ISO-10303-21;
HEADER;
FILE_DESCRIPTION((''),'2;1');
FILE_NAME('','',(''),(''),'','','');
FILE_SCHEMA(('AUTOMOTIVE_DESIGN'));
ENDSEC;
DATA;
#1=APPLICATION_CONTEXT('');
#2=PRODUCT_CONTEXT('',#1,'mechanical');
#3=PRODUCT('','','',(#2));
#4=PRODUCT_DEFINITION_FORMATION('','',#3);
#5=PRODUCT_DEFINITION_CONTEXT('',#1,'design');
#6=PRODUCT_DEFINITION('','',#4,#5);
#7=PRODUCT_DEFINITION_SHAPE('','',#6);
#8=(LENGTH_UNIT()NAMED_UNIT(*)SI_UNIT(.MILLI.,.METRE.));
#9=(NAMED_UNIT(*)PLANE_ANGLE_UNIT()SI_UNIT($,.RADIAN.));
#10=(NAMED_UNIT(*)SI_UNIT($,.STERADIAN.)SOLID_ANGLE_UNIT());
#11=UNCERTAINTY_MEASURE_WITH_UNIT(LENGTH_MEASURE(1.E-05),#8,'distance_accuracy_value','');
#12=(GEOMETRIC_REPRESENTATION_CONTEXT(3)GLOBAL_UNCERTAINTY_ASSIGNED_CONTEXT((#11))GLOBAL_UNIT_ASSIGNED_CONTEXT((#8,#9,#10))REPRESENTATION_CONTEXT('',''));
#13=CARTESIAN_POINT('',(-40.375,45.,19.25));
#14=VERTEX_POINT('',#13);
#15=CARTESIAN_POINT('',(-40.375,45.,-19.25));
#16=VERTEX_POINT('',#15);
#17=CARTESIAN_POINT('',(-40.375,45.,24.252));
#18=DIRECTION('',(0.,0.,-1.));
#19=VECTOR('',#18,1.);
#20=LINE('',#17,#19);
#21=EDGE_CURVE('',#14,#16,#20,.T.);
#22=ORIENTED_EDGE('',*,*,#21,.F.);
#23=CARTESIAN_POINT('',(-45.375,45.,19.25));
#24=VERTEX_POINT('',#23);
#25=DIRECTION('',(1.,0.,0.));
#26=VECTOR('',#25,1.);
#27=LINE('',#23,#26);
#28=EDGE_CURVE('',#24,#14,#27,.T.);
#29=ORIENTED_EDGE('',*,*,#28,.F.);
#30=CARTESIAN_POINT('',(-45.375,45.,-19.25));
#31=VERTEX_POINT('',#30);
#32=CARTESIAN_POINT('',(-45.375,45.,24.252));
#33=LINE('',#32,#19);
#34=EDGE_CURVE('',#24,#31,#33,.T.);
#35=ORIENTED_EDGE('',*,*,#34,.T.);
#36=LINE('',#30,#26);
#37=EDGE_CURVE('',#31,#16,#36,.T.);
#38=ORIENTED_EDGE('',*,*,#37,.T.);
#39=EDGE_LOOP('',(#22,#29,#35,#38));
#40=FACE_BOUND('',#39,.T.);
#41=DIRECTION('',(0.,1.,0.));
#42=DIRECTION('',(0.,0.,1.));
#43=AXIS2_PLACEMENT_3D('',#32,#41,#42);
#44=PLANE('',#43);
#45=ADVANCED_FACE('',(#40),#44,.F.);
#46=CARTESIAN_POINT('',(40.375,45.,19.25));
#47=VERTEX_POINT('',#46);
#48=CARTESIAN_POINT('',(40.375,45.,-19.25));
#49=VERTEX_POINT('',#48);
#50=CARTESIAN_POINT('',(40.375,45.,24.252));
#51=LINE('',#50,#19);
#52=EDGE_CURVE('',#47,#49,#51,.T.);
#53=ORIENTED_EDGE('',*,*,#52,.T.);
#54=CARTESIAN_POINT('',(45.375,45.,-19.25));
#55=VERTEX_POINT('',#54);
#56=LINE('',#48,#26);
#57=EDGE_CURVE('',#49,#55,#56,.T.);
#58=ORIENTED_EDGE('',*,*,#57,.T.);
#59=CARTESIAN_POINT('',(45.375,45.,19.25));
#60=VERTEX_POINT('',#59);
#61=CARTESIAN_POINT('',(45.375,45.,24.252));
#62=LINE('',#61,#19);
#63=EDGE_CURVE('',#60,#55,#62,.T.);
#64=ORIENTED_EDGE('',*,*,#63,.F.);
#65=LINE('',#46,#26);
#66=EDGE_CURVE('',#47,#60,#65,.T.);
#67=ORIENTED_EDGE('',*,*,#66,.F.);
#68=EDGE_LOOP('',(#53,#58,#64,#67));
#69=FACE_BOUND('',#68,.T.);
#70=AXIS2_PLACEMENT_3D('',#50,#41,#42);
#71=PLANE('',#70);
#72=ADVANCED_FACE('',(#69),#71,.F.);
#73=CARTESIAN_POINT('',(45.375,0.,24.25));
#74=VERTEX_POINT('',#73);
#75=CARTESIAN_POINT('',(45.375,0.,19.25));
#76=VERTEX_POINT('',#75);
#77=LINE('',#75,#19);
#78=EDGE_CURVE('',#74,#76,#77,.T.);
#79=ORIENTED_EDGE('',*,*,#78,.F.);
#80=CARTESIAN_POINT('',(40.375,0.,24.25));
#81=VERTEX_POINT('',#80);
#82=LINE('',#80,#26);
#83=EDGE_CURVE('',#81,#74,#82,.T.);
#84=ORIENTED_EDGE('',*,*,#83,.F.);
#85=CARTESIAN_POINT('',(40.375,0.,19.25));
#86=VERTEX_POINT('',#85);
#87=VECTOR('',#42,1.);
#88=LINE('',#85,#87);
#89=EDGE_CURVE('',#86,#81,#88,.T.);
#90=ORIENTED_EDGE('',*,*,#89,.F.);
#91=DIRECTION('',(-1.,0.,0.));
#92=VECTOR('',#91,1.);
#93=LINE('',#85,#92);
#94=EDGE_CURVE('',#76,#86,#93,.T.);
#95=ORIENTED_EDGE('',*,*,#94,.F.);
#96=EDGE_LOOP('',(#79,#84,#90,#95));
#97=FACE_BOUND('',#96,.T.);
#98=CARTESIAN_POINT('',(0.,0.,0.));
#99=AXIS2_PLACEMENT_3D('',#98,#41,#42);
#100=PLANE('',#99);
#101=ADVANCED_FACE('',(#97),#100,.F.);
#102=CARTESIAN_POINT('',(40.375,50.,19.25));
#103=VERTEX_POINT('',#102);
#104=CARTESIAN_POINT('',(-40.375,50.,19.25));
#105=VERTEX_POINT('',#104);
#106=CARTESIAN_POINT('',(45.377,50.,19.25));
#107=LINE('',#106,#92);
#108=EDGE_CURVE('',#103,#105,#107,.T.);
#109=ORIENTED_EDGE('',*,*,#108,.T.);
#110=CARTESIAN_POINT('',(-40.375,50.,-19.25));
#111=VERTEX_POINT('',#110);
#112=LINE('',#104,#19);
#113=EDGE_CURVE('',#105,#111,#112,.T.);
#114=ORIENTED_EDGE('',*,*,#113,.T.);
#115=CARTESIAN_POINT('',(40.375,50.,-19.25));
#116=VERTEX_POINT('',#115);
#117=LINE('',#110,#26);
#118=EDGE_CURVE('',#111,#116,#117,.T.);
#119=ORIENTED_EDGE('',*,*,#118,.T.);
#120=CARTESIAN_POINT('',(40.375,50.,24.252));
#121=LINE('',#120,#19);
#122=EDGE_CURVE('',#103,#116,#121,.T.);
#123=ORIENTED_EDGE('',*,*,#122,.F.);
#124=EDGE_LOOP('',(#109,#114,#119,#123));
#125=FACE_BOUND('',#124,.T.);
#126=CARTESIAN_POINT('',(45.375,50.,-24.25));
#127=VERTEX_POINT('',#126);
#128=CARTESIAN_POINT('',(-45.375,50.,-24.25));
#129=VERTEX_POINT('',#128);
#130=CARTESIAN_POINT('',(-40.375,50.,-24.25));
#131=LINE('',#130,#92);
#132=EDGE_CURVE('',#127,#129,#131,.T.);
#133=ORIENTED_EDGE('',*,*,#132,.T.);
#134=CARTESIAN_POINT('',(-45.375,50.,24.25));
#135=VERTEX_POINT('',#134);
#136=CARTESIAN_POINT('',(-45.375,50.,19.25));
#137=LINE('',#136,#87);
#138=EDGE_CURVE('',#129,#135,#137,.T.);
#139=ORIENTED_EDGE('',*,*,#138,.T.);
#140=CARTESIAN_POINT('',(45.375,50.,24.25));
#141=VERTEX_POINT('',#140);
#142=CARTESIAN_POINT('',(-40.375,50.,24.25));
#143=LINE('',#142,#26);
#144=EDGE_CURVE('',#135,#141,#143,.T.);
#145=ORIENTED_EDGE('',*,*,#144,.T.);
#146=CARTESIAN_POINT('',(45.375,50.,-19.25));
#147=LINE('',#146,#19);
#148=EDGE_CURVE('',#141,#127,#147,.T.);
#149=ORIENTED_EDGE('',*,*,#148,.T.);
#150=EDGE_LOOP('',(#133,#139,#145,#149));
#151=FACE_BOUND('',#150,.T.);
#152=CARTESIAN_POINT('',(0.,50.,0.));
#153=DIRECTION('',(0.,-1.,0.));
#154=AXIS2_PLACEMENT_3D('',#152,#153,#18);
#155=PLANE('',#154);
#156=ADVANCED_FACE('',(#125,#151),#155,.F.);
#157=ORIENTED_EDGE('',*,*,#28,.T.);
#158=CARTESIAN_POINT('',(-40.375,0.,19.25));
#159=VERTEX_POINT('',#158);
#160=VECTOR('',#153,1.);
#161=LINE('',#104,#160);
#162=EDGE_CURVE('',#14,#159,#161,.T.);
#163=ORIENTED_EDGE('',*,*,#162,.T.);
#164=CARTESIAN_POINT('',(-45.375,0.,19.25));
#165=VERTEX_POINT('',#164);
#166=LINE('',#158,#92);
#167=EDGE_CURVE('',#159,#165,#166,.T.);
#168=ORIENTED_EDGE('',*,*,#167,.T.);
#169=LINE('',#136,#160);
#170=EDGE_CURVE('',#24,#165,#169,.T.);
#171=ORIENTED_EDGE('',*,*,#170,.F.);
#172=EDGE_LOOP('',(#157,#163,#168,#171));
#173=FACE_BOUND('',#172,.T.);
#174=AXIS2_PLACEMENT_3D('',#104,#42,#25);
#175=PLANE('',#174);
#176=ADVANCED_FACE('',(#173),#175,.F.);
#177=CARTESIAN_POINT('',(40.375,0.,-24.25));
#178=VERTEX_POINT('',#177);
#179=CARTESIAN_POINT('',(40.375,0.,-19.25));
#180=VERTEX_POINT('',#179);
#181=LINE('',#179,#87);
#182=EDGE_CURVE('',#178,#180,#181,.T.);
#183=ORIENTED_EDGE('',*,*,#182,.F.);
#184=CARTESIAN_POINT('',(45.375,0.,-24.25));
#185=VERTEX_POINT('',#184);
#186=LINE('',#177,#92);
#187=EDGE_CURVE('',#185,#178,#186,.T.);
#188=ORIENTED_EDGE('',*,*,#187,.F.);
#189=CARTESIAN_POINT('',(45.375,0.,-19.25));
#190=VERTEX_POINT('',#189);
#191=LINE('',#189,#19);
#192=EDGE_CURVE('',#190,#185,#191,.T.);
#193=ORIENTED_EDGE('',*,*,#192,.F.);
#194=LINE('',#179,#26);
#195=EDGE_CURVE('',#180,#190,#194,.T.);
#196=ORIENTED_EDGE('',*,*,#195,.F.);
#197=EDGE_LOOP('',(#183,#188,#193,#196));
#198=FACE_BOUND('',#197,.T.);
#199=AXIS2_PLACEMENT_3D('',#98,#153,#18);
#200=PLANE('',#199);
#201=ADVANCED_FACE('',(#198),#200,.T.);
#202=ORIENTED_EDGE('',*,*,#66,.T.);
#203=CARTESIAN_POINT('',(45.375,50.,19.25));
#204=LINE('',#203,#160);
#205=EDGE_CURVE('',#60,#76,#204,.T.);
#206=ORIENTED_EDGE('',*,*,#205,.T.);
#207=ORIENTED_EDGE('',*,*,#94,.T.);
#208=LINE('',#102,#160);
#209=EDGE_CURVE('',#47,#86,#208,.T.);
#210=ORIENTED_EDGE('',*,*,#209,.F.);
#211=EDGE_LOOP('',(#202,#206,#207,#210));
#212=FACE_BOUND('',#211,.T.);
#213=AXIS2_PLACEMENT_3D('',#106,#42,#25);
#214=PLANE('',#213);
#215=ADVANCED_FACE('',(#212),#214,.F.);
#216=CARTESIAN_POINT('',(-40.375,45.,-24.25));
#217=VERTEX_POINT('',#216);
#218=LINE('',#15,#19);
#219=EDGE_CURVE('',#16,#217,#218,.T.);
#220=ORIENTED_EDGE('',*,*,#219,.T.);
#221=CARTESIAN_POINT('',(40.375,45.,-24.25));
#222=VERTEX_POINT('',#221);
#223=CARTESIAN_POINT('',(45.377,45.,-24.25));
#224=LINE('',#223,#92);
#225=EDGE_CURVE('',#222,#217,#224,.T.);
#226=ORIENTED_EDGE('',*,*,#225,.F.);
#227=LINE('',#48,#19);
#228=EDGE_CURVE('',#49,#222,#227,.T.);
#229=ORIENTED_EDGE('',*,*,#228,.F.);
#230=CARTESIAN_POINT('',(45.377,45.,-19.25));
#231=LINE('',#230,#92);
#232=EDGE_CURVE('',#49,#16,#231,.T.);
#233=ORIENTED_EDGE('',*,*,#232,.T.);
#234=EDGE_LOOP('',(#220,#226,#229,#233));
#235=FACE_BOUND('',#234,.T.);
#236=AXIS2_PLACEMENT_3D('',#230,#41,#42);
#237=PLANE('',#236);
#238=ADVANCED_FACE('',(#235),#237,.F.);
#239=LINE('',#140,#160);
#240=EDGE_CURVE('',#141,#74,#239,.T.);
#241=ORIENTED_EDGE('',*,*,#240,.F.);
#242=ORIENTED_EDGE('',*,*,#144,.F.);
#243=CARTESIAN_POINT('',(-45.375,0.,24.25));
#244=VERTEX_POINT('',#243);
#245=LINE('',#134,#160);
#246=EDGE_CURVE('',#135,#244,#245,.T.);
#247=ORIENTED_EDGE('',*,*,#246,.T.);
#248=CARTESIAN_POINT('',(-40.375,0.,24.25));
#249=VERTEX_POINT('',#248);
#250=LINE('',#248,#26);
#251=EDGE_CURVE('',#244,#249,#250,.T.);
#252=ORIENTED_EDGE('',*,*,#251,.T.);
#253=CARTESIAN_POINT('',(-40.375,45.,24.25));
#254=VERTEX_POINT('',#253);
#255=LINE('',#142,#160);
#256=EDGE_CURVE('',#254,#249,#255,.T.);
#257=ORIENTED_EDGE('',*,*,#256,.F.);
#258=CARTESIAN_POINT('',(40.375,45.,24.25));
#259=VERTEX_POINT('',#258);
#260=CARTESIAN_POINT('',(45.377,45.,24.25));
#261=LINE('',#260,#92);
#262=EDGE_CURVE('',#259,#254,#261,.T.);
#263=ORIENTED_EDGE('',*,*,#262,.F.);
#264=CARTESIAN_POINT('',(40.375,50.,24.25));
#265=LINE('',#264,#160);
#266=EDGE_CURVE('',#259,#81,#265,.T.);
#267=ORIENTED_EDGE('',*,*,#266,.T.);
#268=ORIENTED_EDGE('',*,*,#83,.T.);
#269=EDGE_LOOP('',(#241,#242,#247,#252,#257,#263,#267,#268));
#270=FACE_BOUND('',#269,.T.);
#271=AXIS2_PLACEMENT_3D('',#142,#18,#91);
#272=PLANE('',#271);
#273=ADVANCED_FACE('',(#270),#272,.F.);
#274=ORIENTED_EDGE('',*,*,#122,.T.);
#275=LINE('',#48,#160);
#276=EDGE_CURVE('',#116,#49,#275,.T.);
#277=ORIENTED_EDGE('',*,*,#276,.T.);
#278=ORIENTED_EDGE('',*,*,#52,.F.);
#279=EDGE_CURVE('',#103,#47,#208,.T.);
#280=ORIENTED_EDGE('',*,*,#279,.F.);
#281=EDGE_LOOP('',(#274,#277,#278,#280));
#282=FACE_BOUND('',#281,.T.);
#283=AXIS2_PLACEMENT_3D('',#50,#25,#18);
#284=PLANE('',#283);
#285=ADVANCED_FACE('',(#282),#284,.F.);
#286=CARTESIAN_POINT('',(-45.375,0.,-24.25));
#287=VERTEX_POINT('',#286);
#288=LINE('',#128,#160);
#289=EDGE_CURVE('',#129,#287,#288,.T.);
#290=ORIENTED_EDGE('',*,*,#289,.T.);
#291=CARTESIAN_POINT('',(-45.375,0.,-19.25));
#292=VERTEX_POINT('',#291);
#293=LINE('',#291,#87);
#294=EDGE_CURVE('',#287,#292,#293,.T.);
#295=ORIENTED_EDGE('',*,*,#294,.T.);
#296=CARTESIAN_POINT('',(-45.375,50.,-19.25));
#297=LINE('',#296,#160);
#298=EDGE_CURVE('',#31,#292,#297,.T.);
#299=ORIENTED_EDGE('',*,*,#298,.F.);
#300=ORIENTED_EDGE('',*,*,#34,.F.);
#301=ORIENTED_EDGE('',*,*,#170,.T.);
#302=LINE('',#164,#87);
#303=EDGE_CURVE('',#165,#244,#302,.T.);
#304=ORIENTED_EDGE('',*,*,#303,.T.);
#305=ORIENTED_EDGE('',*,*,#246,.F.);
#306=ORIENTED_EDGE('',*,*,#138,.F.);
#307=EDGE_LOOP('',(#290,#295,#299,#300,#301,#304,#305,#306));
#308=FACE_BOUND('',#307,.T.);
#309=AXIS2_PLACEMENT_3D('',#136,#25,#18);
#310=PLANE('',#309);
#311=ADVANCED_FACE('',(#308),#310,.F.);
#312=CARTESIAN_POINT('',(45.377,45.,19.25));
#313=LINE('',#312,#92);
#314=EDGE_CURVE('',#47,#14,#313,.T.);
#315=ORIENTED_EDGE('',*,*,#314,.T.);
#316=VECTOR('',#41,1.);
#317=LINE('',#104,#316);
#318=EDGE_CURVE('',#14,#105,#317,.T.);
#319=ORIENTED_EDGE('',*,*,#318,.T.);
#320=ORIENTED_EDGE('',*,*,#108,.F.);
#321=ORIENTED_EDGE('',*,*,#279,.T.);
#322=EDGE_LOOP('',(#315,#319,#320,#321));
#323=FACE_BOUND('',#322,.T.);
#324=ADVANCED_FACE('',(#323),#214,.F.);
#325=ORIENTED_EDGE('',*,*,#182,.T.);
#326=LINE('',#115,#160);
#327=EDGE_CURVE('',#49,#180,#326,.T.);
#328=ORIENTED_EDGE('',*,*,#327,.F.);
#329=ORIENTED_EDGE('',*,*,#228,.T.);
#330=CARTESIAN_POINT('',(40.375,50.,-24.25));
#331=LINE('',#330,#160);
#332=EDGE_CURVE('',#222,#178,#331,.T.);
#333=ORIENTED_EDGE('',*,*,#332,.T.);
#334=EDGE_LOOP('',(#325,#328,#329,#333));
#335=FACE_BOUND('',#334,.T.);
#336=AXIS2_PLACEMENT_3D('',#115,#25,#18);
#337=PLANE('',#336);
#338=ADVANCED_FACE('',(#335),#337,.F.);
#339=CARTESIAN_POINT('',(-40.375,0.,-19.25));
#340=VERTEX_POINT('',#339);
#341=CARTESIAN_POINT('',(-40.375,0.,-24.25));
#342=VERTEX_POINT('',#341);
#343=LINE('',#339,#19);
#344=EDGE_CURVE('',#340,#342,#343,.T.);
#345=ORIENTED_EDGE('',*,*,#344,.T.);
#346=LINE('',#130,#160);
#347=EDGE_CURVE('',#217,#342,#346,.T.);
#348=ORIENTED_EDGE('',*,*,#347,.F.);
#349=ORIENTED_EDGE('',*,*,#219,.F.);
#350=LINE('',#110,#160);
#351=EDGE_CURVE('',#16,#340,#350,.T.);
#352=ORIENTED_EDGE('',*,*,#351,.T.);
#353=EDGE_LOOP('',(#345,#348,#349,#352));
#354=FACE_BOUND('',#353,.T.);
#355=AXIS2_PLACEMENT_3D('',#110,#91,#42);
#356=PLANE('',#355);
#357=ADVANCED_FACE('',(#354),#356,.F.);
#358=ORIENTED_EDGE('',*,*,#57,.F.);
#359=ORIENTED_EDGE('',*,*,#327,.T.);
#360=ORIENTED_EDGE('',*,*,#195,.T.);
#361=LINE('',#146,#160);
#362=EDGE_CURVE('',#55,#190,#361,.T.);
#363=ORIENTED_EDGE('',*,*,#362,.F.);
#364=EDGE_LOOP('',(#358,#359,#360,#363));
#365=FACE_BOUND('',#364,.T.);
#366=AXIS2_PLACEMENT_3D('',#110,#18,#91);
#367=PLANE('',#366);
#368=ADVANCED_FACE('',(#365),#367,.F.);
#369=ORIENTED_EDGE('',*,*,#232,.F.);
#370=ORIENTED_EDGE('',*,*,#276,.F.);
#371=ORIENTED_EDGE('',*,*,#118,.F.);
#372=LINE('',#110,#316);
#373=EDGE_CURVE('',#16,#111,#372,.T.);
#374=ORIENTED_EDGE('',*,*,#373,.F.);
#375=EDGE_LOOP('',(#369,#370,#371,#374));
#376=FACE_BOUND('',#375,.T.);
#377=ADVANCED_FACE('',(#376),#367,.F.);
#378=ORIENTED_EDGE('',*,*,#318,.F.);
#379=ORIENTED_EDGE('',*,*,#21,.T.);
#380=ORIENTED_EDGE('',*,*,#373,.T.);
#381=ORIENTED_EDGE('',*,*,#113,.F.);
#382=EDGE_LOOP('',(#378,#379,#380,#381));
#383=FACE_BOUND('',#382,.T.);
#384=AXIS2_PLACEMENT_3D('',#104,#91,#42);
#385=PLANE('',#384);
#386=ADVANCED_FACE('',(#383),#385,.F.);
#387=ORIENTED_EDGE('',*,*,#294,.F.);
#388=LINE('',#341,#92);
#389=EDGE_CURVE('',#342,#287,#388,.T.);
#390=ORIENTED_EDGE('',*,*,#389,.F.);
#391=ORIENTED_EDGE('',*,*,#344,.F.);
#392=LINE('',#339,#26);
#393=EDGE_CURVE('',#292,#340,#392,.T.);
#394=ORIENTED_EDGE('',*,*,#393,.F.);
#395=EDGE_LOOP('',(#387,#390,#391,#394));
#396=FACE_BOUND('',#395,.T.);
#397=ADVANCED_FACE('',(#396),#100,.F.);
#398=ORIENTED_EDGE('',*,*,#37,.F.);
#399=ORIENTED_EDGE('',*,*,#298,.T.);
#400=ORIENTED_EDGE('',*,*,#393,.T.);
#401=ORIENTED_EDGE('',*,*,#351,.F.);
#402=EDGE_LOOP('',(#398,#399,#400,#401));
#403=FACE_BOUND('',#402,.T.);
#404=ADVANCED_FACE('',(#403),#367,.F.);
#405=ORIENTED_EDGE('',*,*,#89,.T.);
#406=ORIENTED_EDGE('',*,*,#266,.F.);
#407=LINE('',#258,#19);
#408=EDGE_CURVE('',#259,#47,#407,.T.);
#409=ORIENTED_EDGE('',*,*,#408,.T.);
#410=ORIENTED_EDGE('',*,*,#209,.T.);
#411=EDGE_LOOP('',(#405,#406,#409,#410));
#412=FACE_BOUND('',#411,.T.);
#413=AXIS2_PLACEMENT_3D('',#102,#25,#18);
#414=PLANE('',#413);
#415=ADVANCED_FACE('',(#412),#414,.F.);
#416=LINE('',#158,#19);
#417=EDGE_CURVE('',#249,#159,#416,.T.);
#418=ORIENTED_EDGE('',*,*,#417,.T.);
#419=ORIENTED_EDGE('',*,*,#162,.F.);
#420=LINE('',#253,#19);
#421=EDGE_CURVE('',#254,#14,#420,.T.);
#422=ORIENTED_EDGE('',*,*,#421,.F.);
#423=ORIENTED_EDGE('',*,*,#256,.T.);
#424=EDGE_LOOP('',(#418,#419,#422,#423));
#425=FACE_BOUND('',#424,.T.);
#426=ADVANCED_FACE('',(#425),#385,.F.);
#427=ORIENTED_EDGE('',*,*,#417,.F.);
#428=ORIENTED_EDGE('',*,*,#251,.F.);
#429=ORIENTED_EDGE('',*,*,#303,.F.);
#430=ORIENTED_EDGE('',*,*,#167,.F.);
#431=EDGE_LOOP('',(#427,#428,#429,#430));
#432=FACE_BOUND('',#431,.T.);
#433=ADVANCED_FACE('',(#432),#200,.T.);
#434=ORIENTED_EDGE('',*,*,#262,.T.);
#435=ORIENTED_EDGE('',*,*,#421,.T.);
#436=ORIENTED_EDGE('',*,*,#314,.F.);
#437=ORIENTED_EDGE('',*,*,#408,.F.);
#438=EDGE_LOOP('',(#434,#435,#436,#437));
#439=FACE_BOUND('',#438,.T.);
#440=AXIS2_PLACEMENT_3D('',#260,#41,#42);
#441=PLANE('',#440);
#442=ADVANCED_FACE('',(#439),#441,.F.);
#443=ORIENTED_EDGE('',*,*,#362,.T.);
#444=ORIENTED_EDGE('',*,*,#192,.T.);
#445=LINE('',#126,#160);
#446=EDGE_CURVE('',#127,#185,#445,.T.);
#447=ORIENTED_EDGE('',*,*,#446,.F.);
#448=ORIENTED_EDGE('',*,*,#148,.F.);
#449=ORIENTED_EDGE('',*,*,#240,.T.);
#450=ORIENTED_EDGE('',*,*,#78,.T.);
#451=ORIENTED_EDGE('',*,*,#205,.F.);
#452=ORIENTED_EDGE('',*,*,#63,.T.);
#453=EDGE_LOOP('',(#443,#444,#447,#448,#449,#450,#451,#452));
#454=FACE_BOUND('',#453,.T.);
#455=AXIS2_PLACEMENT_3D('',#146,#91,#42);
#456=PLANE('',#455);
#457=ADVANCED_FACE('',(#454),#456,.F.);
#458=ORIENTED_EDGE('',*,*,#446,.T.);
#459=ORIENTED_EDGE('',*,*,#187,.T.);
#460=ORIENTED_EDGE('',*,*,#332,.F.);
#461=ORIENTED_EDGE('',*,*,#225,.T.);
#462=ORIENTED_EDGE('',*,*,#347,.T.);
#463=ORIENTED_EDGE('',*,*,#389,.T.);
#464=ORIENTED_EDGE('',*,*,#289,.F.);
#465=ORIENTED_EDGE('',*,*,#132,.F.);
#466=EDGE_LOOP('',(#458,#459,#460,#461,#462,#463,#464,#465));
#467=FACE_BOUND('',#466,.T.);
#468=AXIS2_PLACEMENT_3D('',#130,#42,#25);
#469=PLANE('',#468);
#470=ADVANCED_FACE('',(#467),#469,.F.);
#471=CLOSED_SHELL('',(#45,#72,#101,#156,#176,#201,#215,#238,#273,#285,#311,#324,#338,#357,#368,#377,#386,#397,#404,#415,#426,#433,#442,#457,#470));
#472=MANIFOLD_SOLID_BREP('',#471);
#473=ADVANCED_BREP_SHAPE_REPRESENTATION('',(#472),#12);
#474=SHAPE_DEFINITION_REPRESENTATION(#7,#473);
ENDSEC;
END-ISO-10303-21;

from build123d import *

# Parameters (mm, degrees)
SKETCH1_W               = 5
SKETCH1_H               = 5
BOSS_EXTRUDE1_DEPTH     = 50
BOSS_EXTRUDE1_2_DEPTH   = 50
BOSS_EXTRUDE1_3_DEPTH   = 50
BOSS_EXTRUDE1_4_DEPTH   = 50
BOSS_EXTRUDE2_OUTLINE_W = 5
BOSS_EXTRUDE2_OUTLINE_H = 5
BOSS_EXTRUDE2_DEPTH     = 80.75
SKETCH3_W               = 5
SKETCH3_H               = 5
BOSS_EXTRUDE3_DEPTH     = 38.5


# Read off the part's stored shape, not the designer's step: Boss-Extrude2
with BuildPart() as part:
    # Sketch1 → Boss-Extrude1 (new body)
    with BuildSketch(Plane(origin=(0, 0, 0), x_dir=(1, 0, 0), z_dir=(0, 1, 0))):
        with Locations((-42.875, 21.75)):
            Rectangle(SKETCH1_W, SKETCH1_H)
    extrude(amount=BOSS_EXTRUDE1_DEPTH)



with BuildPart() as body_2:
    # Sketch1 → Boss-Extrude1 2 (new body)
    with BuildSketch(Plane(origin=(0, 0, 0), x_dir=(1, 0, 0), z_dir=(0, 1, 0))):
        with Locations((-42.875, -21.75)):
            Rectangle(SKETCH1_W, SKETCH1_H)
    extrude(amount=BOSS_EXTRUDE1_2_DEPTH)


with BuildPart() as body_3:
    # Sketch1 → Boss-Extrude1 3 (new body)
    with BuildSketch(Plane(origin=(0, 0, 0), x_dir=(1, 0, 0), z_dir=(0, 1, 0))):
        with Locations((42.875, 21.75)):
            Rectangle(SKETCH1_W, SKETCH1_H)
    extrude(amount=BOSS_EXTRUDE1_3_DEPTH)


with BuildPart() as body_4:
    # Sketch1 → Boss-Extrude1 4 (new body)
    with BuildSketch(Plane(origin=(0, 0, 0), x_dir=(1, 0, 0), z_dir=(0, 1, 0))):
        with Locations((42.875, -21.75)):
            Rectangle(SKETCH1_W, SKETCH1_H)
    extrude(amount=BOSS_EXTRUDE1_4_DEPTH)


with BuildPart() as part_1:
    add(part.part)

    add(body_3.part)  # Boss-Extrude2 merges body 3
    # Boss-Extrude2 outline → Boss-Extrude2 (add)
    with BuildSketch(Plane(origin=(-40.375, 0, 0), x_dir=(0, 0, -1), z_dir=(1, 0, 0))):
        with Locations((-21.75, 47.5)):
            Rectangle(BOSS_EXTRUDE2_OUTLINE_W, BOSS_EXTRUDE2_OUTLINE_H)
        with Locations((21.75, 47.5)):
            Rectangle(BOSS_EXTRUDE2_OUTLINE_W, BOSS_EXTRUDE2_OUTLINE_H)
    extrude(amount=BOSS_EXTRUDE2_DEPTH)


    add(body_2.part)  # Boss-Extrude3 merges body 2

    add(body_4.part)  # Boss-Extrude3 merges body 4
    # Sketch3 → Boss-Extrude3 (add)
    with BuildSketch(Plane.XY.offset(-19.25)):
        with Locations((-42.875, 47.5)):
            Rectangle(SKETCH3_W, SKETCH3_H)
        with Locations((42.875, 47.5)):
            Rectangle(SKETCH3_W, SKETCH3_H)
    extrude(amount=BOSS_EXTRUDE3_DEPTH)


solid = part_1.part
